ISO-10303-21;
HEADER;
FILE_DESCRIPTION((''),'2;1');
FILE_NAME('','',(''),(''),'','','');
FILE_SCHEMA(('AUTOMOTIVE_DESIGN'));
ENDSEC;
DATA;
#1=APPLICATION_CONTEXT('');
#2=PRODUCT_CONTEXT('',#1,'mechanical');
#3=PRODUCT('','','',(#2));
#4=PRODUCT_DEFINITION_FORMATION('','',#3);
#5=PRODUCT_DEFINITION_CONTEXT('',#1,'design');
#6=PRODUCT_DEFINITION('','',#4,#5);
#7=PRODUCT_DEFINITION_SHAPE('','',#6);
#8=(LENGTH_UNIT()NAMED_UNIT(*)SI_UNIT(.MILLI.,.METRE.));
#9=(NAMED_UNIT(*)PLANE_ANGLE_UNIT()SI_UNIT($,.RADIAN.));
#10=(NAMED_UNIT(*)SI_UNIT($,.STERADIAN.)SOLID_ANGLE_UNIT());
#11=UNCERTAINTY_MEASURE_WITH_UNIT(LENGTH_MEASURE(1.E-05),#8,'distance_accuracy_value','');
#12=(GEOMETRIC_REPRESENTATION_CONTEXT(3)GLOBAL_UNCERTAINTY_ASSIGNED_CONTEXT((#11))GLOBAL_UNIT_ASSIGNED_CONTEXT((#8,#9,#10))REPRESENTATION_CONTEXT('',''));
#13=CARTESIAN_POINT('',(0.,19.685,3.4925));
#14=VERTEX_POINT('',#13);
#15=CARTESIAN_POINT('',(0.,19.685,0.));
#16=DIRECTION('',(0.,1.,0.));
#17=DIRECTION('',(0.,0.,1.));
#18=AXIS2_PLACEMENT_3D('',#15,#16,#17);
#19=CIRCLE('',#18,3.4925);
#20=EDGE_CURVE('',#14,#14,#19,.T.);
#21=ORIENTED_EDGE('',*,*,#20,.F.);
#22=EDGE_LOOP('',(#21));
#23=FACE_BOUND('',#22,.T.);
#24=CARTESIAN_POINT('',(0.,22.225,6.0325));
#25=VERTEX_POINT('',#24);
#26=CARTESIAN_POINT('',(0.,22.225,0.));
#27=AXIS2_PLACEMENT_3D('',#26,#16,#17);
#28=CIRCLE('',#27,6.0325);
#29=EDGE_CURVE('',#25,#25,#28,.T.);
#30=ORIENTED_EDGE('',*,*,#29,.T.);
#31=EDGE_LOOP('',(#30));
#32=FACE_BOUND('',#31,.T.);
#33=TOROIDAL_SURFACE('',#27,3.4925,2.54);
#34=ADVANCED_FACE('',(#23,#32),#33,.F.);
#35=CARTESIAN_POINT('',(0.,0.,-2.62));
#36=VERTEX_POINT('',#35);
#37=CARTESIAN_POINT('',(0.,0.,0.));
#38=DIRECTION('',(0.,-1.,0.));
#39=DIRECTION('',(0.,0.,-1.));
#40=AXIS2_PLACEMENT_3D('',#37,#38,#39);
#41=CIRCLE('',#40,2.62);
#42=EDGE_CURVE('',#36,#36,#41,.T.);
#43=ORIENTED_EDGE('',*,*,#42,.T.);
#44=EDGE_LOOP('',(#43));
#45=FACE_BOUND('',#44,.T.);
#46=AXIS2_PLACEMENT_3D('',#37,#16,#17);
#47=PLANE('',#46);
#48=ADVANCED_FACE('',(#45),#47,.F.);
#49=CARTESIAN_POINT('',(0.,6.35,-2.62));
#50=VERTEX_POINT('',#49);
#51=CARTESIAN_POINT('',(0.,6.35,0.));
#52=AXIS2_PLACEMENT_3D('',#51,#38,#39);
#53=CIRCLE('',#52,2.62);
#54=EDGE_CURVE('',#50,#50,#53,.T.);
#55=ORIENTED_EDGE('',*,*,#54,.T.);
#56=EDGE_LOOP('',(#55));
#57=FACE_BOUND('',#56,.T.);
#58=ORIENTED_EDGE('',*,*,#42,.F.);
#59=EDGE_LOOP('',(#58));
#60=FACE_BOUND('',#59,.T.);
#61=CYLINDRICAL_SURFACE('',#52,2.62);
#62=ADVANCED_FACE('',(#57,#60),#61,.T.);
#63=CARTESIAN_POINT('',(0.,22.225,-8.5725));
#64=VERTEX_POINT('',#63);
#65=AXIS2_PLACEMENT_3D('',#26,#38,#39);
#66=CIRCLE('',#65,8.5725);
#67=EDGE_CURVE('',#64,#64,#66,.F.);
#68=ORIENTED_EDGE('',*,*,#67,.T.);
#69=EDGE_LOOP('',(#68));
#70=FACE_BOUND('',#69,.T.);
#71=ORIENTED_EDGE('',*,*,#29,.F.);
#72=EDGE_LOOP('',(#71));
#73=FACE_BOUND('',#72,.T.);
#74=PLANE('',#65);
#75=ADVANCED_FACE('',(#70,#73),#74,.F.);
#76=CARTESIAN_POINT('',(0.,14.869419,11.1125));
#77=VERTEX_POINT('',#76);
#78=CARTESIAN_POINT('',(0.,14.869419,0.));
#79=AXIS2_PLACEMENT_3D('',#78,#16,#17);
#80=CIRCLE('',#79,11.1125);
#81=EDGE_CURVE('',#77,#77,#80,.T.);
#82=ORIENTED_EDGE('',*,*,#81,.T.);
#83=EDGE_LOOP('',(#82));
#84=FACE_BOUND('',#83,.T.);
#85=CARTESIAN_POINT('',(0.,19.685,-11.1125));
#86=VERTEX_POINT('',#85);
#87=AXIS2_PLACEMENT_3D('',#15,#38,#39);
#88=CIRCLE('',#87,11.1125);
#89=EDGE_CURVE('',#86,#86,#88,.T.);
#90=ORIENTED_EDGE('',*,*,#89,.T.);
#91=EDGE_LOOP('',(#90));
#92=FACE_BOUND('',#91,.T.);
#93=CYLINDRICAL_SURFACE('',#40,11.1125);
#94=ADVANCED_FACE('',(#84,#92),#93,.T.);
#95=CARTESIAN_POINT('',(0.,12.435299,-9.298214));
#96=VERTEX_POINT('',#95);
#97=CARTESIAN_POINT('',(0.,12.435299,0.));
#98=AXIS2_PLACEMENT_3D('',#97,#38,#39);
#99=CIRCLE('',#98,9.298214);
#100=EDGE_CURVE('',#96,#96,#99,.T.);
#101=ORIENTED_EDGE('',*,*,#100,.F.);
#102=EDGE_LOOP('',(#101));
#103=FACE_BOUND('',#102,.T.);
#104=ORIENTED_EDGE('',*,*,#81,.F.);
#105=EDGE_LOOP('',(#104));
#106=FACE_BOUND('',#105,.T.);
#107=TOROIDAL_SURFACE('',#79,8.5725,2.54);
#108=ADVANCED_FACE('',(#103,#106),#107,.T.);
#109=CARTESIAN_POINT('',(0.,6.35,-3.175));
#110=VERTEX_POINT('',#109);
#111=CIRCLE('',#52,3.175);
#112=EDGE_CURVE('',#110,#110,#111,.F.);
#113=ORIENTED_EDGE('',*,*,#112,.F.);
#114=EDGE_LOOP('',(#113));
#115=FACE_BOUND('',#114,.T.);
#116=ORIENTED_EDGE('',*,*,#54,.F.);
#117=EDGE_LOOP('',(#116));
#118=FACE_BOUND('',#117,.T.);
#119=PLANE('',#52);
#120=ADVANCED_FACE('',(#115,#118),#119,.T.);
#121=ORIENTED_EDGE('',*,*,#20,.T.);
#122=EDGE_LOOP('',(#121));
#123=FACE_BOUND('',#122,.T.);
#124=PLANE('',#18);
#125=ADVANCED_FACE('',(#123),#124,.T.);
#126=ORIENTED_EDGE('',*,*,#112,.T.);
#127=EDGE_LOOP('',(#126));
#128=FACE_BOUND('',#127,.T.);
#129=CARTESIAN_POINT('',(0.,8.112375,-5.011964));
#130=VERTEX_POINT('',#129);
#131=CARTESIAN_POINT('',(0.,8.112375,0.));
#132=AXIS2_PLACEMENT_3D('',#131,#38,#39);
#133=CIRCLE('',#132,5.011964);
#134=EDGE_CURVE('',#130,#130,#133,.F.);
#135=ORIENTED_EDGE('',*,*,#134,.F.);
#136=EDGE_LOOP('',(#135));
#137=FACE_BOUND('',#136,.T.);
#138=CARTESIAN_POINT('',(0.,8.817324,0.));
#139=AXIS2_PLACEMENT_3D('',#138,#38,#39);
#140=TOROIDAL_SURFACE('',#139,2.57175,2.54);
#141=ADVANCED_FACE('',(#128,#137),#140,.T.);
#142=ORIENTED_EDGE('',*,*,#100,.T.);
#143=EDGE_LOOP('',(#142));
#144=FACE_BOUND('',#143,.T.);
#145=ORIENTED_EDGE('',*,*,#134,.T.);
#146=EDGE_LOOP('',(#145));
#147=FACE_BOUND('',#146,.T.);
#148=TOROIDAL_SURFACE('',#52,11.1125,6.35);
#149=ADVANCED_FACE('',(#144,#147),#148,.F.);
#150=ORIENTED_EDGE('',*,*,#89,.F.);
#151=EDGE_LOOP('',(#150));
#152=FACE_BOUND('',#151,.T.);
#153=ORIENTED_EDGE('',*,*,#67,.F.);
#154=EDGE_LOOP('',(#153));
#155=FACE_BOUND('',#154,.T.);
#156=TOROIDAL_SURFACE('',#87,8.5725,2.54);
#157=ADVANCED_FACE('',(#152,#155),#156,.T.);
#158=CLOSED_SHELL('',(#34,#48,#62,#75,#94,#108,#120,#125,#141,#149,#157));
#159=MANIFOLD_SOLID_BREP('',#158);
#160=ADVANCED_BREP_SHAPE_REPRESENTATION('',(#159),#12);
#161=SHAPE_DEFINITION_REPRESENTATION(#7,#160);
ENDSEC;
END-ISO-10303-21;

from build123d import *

# Parameters (mm, degrees)
FILLET1_R          = 2.54
SKETCH2_R          = 6.0325
CUT_EXTRUDE1_DEPTH = 2.54
FILLET2_R          = 2.54
SKETCH4_OUTSIDE_W  = 31.924
SKETCH4_OUTSIDE_H  = 31.924
SKETCH4_OUTSIDE_R  = 2.62
CUT_EXTRUDE2_DEPTH = 6.35


# Some blends are built 0.0001 mm under size
with BuildPart() as part:
    # Sketch1 → Base-Revolve (revolve)
    with BuildSketch(Plane.XY, mode=Mode.PRIVATE) as base_revolve_sk:
        with BuildLine():
            ThreePointArc((11.1125, 12.7), (6.622371939, 10.840128061), (4.7625, 6.35))
            Line((4.7625, 6.35), (3.175, 6.35))
            Line((3.175, 6.35), (3.175, 0))
            Line((3.175, 0), (0, 0))
            Line((0, 0), (0, 22.225))
            Line((0, 22.225), (11.1125, 22.225))
            Line((11.1125, 22.225), (11.1125, 12.7))
        make_face()
    revolve(base_revolve_sk.sketch.rotate(Axis((0, 0, 0), (0, 1, 0)), 90), axis=Axis((0, 0, 0), (0, 1, 0)))

    # Fillet1
    # the kernel refuses this fillet: 2.54 mm, written as the material it takes off along each edge
    with BuildSketch(Plane(origin=(0, 6.35, 0), x_dir=(0, 0, -1), z_dir=(1, 0, 0))) as fillet1_piece_1:
        with BuildLine():
            CenterArc((2.57175, 2.467324348), FILLET1_R, 283.739035174, 60.14756783)
            Line((3.175, 0), (3.187065, -0.049346487))
            ThreePointArc((3.187065, -0.049346487), (3.96875, -0.0508), (4.7625, -0.0508))
            Line((4.7625, -0.0508), (4.8133, 0))
            ThreePointArc((4.8133, 0), (4.875473976, 0.882851637), (5.060768571, 1.748275538))
            Line((5.060768571, 1.748275538), (5.011964286, 1.762374534))
        make_face()
    revolve(axis=Axis((0, 6.35, 0), (0, 1, 0)), mode=Mode.SUBTRACT)
    with BuildSketch(Plane(origin=(0, 22.225, 0), x_dir=(0, 0, -1), z_dir=(1, 0, 0))) as fillet1_piece_2:
        with BuildLine():
            CenterArc((11.1125 - FILLET1_R, -FILLET1_R), FILLET1_R, 0, 90)
            Line((11.1125, -FILLET1_R), (11.1125 + FILLET1_R * 0.02, -FILLET1_R))
            Line((11.1125 + FILLET1_R * 0.02, -FILLET1_R), (11.1125 + FILLET1_R * 0.02, FILLET1_R * 0.02))
            Line((11.1125 + FILLET1_R * 0.02, FILLET1_R * 0.02), (11.1125 - FILLET1_R, FILLET1_R * 0.02))
            Line((11.1125 - FILLET1_R, FILLET1_R * 0.02), (11.1125 - FILLET1_R, 0))
        make_face()
    revolve(axis=Axis((0, 22.225, 0), (0, 1, 0)), mode=Mode.SUBTRACT)
    with BuildSketch(Plane(origin=(0, 12.7, 0), x_dir=(0, 0, -1), z_dir=(1, 0, 0))) as fillet1_piece_3:
        with BuildLine():
            CenterArc((8.5725, 2.169418994), FILLET1_R, 286.601549599, 73.398450401)
            Line((11.1125, 2.169418994), (11.1633, 2.169418994))
            Line((11.1633, 2.169418994), (11.1633, 0))
            Line((11.1633, 0), (11.1125, -0.0508))
            ThreePointArc((11.1125, -0.0508), (10.203087128, -0.116791447), (9.312728571, -0.313383113))
            Line((9.312728571, -0.313383113), (9.298214286, -0.264700718))
        make_face()
    revolve(axis=Axis((0, 12.7, 0), (0, 1, 0)), mode=Mode.SUBTRACT)

    # Sketch2 → Cut-Extrude1 (cut)
    with BuildSketch(Plane(origin=(0, 22.225, 0), x_dir=(1, 0, 0), z_dir=(0, 1, 0))):
        with Locations(Location((0, 0, 0), (0, 0, 270))):
            Circle(SKETCH2_R)
    extrude(amount=-CUT_EXTRUDE1_DEPTH, mode=Mode.SUBTRACT)

    # Fillet2
    fillet2_edges = [part.edges().sort_by_distance(p)[0] for p in [
        (0, 19.685, -6.0325),
    ]]
    fillet(fillet2_edges, radius=FILLET2_R - 0.0001)  # a hair under: the kernel refuses the full size

    # Sketch4 outside → Cut-Extrude2 (cut)
    with BuildSketch(Plane.XZ):
        Rectangle(SKETCH4_OUTSIDE_W, SKETCH4_OUTSIDE_H)
        with Locations(Location((0, 0, 0), (0, 0, 270))):
            Circle(SKETCH4_OUTSIDE_R, mode=Mode.SUBTRACT)
    extrude(amount=-CUT_EXTRUDE2_DEPTH, mode=Mode.SUBTRACT)


solid = part.part
